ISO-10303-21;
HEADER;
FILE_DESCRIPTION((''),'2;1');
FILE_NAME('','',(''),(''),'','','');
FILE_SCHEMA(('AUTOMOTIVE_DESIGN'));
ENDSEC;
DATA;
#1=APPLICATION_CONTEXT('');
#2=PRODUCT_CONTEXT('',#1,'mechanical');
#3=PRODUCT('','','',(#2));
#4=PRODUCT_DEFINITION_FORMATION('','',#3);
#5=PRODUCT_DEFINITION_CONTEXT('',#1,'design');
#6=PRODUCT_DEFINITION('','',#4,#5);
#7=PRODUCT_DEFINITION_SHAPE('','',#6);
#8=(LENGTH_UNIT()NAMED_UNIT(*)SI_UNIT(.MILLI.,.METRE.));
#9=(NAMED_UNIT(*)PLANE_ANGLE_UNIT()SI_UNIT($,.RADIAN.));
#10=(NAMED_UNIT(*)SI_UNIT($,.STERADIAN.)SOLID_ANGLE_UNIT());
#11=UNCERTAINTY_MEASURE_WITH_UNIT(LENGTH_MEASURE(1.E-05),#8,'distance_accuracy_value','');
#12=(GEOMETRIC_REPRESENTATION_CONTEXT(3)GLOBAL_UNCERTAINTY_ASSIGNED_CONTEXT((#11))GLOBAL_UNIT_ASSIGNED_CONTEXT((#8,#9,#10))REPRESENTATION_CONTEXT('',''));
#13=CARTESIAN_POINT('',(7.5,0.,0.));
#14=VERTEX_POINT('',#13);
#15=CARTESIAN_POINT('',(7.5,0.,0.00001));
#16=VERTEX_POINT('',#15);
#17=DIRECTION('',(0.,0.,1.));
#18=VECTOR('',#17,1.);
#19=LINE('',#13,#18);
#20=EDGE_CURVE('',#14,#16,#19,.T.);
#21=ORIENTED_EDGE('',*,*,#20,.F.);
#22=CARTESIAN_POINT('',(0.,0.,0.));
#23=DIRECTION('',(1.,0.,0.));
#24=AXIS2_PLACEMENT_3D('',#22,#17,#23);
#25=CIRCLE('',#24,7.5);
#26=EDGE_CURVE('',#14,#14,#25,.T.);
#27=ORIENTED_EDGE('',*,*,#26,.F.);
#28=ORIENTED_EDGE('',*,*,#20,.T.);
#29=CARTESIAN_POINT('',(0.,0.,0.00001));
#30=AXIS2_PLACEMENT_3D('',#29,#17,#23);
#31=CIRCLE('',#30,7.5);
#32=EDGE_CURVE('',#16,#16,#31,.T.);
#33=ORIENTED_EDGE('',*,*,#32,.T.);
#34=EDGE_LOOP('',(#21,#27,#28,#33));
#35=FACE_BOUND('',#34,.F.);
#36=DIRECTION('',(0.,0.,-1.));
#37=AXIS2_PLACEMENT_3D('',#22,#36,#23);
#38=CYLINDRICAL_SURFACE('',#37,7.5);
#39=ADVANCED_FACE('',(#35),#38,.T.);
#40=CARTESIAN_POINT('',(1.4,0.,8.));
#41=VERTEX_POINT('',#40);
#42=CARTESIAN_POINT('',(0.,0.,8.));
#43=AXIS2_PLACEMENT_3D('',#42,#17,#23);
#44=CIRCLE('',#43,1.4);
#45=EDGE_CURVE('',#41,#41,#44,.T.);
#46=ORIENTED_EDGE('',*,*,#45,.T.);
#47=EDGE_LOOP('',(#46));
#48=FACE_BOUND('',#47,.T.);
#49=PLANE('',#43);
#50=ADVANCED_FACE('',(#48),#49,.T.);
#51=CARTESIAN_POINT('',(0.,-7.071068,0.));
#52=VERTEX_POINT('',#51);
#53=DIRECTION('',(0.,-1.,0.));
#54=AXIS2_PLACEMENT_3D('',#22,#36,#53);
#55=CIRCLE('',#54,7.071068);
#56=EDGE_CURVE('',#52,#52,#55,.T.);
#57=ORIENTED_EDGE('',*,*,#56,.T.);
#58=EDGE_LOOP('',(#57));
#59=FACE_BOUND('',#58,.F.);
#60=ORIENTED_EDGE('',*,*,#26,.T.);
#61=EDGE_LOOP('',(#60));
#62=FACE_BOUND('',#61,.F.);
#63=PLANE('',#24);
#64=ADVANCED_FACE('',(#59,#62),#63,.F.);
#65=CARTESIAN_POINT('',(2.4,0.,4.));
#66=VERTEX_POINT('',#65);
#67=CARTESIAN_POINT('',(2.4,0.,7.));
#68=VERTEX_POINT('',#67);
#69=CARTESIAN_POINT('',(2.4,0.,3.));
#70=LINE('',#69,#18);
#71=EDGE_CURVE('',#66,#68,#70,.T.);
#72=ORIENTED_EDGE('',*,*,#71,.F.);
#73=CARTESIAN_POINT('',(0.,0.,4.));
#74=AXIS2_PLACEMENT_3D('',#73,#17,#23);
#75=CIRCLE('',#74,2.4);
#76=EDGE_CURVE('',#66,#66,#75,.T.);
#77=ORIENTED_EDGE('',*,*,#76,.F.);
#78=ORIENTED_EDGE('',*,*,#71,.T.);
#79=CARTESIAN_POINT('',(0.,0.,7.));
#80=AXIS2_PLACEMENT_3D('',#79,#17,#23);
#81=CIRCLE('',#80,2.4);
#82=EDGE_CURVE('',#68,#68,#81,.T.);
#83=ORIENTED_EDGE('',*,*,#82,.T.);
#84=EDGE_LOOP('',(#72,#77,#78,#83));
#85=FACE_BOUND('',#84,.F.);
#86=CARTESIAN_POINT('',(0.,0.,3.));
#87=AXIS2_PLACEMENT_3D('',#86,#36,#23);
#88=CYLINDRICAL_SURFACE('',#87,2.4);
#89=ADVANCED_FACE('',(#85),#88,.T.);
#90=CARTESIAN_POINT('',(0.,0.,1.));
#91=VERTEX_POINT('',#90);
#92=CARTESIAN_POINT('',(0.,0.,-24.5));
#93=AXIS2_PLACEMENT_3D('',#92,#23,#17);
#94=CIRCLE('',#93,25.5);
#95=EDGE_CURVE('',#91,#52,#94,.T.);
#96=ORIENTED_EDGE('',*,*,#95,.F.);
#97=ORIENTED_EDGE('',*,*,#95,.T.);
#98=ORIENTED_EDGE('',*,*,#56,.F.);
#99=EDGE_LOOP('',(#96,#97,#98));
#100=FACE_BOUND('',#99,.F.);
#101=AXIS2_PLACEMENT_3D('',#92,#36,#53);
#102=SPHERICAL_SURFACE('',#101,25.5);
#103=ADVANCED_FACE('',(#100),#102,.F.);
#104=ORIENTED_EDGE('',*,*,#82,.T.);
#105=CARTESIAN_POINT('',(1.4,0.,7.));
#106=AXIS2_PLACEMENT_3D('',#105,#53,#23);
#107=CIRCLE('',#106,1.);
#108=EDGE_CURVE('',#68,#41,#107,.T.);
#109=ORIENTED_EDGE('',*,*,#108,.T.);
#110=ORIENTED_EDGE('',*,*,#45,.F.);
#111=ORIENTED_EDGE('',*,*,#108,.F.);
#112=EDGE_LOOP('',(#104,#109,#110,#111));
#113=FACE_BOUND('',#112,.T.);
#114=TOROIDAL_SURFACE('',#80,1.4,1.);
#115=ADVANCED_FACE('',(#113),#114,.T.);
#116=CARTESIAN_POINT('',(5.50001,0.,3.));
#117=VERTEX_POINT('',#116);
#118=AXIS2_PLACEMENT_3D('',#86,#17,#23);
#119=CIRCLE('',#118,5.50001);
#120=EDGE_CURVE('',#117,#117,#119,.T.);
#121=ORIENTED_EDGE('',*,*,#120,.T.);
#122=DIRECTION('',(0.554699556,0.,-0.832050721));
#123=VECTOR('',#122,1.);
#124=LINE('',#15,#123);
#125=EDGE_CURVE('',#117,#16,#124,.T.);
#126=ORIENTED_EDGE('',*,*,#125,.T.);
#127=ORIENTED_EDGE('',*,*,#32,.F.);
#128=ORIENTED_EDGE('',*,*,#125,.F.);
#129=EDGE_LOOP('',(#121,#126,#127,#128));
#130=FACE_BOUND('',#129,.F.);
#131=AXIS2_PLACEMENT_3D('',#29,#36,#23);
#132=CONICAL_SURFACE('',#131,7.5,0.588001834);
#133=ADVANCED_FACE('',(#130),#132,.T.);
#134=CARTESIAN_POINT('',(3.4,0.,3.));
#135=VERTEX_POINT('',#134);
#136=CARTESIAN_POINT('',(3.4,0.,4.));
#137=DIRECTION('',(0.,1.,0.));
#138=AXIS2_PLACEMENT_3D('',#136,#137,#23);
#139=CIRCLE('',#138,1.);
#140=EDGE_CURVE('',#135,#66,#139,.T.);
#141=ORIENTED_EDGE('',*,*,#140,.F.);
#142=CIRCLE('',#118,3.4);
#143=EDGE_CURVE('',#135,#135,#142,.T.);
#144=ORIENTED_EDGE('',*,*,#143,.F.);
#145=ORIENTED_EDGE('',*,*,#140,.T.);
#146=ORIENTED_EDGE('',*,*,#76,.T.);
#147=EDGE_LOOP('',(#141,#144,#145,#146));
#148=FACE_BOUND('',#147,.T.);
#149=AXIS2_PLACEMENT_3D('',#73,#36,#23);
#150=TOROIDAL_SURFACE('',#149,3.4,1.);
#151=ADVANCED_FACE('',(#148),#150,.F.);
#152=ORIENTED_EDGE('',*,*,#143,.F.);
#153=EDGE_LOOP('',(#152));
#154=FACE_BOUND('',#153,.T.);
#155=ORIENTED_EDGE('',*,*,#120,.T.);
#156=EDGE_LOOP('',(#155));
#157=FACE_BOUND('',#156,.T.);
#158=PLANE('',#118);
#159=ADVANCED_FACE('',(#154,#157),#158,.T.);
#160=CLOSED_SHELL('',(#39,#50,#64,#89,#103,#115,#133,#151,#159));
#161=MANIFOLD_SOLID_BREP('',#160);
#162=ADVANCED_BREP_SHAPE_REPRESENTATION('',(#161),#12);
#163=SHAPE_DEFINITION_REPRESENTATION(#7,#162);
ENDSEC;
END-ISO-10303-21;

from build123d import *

# Parameters (mm, degrees)
F0_R     = 7.5
F1_DEPTH = 3
F2_SIZE2 = 2.99999
F2_SIZE  = 1.99999
F3_R     = 2.4
F4_DEPTH = 5
F5_R     = 1


# Not quite as in the source:
# - a fillet or chamfer is up to 0.001 mm smaller than in the source, because OpenCascade refuses the exact size


with BuildPart() as f1:
    # F0 (on Top) → F1 (new body)
    with BuildSketch(Plane.XY):
        Circle(F0_R)
    extrude(amount=F1_DEPTH)

    # F2 (size 2 and 3 in the source; OpenCascade refuses exactly that, so slightly less here)
    f2_edges = [f1.edges().sort_by_distance(p)[0] for p in [
        (-7.5, 0, 3),
    ]]
    f2_side = f1.faces().sort_by_distance((0, 0, 3))[0]
    chamfer(f2_edges, length=F2_SIZE, length2=F2_SIZE2, reference=f2_side)

    # F3 (on face) → F4 (join)
    with BuildSketch(Plane.XY.offset(3)):
        Circle(F3_R)
    extrude(amount=F4_DEPTH)

    # F5
    f5_edges = [f1.edges().sort_by_distance(p)[0] for p in [
        (-2.4, 0, 8),
        (-2.4, 0, 3),
    ]]
    fillet(f5_edges, radius=F5_R)

    # F6 (on Right) → F7 (revolve, cut)
    with BuildSketch(Plane.YZ):
        with BuildLine():
            Line((0, 0), (0, 1))
            ThreePointArc((0, 1), (-18.0312229203, -6.4687770797), (-25.5, -24.5))
            Line((-25.5, -24.5), (0, -24.5))
            Line((0, -24.5), (0, 0))
        make_face()
    revolve(axis=Axis((0, 0, -12.25), (0, 0, -1)), mode=Mode.SUBTRACT)


solid = f1.part
